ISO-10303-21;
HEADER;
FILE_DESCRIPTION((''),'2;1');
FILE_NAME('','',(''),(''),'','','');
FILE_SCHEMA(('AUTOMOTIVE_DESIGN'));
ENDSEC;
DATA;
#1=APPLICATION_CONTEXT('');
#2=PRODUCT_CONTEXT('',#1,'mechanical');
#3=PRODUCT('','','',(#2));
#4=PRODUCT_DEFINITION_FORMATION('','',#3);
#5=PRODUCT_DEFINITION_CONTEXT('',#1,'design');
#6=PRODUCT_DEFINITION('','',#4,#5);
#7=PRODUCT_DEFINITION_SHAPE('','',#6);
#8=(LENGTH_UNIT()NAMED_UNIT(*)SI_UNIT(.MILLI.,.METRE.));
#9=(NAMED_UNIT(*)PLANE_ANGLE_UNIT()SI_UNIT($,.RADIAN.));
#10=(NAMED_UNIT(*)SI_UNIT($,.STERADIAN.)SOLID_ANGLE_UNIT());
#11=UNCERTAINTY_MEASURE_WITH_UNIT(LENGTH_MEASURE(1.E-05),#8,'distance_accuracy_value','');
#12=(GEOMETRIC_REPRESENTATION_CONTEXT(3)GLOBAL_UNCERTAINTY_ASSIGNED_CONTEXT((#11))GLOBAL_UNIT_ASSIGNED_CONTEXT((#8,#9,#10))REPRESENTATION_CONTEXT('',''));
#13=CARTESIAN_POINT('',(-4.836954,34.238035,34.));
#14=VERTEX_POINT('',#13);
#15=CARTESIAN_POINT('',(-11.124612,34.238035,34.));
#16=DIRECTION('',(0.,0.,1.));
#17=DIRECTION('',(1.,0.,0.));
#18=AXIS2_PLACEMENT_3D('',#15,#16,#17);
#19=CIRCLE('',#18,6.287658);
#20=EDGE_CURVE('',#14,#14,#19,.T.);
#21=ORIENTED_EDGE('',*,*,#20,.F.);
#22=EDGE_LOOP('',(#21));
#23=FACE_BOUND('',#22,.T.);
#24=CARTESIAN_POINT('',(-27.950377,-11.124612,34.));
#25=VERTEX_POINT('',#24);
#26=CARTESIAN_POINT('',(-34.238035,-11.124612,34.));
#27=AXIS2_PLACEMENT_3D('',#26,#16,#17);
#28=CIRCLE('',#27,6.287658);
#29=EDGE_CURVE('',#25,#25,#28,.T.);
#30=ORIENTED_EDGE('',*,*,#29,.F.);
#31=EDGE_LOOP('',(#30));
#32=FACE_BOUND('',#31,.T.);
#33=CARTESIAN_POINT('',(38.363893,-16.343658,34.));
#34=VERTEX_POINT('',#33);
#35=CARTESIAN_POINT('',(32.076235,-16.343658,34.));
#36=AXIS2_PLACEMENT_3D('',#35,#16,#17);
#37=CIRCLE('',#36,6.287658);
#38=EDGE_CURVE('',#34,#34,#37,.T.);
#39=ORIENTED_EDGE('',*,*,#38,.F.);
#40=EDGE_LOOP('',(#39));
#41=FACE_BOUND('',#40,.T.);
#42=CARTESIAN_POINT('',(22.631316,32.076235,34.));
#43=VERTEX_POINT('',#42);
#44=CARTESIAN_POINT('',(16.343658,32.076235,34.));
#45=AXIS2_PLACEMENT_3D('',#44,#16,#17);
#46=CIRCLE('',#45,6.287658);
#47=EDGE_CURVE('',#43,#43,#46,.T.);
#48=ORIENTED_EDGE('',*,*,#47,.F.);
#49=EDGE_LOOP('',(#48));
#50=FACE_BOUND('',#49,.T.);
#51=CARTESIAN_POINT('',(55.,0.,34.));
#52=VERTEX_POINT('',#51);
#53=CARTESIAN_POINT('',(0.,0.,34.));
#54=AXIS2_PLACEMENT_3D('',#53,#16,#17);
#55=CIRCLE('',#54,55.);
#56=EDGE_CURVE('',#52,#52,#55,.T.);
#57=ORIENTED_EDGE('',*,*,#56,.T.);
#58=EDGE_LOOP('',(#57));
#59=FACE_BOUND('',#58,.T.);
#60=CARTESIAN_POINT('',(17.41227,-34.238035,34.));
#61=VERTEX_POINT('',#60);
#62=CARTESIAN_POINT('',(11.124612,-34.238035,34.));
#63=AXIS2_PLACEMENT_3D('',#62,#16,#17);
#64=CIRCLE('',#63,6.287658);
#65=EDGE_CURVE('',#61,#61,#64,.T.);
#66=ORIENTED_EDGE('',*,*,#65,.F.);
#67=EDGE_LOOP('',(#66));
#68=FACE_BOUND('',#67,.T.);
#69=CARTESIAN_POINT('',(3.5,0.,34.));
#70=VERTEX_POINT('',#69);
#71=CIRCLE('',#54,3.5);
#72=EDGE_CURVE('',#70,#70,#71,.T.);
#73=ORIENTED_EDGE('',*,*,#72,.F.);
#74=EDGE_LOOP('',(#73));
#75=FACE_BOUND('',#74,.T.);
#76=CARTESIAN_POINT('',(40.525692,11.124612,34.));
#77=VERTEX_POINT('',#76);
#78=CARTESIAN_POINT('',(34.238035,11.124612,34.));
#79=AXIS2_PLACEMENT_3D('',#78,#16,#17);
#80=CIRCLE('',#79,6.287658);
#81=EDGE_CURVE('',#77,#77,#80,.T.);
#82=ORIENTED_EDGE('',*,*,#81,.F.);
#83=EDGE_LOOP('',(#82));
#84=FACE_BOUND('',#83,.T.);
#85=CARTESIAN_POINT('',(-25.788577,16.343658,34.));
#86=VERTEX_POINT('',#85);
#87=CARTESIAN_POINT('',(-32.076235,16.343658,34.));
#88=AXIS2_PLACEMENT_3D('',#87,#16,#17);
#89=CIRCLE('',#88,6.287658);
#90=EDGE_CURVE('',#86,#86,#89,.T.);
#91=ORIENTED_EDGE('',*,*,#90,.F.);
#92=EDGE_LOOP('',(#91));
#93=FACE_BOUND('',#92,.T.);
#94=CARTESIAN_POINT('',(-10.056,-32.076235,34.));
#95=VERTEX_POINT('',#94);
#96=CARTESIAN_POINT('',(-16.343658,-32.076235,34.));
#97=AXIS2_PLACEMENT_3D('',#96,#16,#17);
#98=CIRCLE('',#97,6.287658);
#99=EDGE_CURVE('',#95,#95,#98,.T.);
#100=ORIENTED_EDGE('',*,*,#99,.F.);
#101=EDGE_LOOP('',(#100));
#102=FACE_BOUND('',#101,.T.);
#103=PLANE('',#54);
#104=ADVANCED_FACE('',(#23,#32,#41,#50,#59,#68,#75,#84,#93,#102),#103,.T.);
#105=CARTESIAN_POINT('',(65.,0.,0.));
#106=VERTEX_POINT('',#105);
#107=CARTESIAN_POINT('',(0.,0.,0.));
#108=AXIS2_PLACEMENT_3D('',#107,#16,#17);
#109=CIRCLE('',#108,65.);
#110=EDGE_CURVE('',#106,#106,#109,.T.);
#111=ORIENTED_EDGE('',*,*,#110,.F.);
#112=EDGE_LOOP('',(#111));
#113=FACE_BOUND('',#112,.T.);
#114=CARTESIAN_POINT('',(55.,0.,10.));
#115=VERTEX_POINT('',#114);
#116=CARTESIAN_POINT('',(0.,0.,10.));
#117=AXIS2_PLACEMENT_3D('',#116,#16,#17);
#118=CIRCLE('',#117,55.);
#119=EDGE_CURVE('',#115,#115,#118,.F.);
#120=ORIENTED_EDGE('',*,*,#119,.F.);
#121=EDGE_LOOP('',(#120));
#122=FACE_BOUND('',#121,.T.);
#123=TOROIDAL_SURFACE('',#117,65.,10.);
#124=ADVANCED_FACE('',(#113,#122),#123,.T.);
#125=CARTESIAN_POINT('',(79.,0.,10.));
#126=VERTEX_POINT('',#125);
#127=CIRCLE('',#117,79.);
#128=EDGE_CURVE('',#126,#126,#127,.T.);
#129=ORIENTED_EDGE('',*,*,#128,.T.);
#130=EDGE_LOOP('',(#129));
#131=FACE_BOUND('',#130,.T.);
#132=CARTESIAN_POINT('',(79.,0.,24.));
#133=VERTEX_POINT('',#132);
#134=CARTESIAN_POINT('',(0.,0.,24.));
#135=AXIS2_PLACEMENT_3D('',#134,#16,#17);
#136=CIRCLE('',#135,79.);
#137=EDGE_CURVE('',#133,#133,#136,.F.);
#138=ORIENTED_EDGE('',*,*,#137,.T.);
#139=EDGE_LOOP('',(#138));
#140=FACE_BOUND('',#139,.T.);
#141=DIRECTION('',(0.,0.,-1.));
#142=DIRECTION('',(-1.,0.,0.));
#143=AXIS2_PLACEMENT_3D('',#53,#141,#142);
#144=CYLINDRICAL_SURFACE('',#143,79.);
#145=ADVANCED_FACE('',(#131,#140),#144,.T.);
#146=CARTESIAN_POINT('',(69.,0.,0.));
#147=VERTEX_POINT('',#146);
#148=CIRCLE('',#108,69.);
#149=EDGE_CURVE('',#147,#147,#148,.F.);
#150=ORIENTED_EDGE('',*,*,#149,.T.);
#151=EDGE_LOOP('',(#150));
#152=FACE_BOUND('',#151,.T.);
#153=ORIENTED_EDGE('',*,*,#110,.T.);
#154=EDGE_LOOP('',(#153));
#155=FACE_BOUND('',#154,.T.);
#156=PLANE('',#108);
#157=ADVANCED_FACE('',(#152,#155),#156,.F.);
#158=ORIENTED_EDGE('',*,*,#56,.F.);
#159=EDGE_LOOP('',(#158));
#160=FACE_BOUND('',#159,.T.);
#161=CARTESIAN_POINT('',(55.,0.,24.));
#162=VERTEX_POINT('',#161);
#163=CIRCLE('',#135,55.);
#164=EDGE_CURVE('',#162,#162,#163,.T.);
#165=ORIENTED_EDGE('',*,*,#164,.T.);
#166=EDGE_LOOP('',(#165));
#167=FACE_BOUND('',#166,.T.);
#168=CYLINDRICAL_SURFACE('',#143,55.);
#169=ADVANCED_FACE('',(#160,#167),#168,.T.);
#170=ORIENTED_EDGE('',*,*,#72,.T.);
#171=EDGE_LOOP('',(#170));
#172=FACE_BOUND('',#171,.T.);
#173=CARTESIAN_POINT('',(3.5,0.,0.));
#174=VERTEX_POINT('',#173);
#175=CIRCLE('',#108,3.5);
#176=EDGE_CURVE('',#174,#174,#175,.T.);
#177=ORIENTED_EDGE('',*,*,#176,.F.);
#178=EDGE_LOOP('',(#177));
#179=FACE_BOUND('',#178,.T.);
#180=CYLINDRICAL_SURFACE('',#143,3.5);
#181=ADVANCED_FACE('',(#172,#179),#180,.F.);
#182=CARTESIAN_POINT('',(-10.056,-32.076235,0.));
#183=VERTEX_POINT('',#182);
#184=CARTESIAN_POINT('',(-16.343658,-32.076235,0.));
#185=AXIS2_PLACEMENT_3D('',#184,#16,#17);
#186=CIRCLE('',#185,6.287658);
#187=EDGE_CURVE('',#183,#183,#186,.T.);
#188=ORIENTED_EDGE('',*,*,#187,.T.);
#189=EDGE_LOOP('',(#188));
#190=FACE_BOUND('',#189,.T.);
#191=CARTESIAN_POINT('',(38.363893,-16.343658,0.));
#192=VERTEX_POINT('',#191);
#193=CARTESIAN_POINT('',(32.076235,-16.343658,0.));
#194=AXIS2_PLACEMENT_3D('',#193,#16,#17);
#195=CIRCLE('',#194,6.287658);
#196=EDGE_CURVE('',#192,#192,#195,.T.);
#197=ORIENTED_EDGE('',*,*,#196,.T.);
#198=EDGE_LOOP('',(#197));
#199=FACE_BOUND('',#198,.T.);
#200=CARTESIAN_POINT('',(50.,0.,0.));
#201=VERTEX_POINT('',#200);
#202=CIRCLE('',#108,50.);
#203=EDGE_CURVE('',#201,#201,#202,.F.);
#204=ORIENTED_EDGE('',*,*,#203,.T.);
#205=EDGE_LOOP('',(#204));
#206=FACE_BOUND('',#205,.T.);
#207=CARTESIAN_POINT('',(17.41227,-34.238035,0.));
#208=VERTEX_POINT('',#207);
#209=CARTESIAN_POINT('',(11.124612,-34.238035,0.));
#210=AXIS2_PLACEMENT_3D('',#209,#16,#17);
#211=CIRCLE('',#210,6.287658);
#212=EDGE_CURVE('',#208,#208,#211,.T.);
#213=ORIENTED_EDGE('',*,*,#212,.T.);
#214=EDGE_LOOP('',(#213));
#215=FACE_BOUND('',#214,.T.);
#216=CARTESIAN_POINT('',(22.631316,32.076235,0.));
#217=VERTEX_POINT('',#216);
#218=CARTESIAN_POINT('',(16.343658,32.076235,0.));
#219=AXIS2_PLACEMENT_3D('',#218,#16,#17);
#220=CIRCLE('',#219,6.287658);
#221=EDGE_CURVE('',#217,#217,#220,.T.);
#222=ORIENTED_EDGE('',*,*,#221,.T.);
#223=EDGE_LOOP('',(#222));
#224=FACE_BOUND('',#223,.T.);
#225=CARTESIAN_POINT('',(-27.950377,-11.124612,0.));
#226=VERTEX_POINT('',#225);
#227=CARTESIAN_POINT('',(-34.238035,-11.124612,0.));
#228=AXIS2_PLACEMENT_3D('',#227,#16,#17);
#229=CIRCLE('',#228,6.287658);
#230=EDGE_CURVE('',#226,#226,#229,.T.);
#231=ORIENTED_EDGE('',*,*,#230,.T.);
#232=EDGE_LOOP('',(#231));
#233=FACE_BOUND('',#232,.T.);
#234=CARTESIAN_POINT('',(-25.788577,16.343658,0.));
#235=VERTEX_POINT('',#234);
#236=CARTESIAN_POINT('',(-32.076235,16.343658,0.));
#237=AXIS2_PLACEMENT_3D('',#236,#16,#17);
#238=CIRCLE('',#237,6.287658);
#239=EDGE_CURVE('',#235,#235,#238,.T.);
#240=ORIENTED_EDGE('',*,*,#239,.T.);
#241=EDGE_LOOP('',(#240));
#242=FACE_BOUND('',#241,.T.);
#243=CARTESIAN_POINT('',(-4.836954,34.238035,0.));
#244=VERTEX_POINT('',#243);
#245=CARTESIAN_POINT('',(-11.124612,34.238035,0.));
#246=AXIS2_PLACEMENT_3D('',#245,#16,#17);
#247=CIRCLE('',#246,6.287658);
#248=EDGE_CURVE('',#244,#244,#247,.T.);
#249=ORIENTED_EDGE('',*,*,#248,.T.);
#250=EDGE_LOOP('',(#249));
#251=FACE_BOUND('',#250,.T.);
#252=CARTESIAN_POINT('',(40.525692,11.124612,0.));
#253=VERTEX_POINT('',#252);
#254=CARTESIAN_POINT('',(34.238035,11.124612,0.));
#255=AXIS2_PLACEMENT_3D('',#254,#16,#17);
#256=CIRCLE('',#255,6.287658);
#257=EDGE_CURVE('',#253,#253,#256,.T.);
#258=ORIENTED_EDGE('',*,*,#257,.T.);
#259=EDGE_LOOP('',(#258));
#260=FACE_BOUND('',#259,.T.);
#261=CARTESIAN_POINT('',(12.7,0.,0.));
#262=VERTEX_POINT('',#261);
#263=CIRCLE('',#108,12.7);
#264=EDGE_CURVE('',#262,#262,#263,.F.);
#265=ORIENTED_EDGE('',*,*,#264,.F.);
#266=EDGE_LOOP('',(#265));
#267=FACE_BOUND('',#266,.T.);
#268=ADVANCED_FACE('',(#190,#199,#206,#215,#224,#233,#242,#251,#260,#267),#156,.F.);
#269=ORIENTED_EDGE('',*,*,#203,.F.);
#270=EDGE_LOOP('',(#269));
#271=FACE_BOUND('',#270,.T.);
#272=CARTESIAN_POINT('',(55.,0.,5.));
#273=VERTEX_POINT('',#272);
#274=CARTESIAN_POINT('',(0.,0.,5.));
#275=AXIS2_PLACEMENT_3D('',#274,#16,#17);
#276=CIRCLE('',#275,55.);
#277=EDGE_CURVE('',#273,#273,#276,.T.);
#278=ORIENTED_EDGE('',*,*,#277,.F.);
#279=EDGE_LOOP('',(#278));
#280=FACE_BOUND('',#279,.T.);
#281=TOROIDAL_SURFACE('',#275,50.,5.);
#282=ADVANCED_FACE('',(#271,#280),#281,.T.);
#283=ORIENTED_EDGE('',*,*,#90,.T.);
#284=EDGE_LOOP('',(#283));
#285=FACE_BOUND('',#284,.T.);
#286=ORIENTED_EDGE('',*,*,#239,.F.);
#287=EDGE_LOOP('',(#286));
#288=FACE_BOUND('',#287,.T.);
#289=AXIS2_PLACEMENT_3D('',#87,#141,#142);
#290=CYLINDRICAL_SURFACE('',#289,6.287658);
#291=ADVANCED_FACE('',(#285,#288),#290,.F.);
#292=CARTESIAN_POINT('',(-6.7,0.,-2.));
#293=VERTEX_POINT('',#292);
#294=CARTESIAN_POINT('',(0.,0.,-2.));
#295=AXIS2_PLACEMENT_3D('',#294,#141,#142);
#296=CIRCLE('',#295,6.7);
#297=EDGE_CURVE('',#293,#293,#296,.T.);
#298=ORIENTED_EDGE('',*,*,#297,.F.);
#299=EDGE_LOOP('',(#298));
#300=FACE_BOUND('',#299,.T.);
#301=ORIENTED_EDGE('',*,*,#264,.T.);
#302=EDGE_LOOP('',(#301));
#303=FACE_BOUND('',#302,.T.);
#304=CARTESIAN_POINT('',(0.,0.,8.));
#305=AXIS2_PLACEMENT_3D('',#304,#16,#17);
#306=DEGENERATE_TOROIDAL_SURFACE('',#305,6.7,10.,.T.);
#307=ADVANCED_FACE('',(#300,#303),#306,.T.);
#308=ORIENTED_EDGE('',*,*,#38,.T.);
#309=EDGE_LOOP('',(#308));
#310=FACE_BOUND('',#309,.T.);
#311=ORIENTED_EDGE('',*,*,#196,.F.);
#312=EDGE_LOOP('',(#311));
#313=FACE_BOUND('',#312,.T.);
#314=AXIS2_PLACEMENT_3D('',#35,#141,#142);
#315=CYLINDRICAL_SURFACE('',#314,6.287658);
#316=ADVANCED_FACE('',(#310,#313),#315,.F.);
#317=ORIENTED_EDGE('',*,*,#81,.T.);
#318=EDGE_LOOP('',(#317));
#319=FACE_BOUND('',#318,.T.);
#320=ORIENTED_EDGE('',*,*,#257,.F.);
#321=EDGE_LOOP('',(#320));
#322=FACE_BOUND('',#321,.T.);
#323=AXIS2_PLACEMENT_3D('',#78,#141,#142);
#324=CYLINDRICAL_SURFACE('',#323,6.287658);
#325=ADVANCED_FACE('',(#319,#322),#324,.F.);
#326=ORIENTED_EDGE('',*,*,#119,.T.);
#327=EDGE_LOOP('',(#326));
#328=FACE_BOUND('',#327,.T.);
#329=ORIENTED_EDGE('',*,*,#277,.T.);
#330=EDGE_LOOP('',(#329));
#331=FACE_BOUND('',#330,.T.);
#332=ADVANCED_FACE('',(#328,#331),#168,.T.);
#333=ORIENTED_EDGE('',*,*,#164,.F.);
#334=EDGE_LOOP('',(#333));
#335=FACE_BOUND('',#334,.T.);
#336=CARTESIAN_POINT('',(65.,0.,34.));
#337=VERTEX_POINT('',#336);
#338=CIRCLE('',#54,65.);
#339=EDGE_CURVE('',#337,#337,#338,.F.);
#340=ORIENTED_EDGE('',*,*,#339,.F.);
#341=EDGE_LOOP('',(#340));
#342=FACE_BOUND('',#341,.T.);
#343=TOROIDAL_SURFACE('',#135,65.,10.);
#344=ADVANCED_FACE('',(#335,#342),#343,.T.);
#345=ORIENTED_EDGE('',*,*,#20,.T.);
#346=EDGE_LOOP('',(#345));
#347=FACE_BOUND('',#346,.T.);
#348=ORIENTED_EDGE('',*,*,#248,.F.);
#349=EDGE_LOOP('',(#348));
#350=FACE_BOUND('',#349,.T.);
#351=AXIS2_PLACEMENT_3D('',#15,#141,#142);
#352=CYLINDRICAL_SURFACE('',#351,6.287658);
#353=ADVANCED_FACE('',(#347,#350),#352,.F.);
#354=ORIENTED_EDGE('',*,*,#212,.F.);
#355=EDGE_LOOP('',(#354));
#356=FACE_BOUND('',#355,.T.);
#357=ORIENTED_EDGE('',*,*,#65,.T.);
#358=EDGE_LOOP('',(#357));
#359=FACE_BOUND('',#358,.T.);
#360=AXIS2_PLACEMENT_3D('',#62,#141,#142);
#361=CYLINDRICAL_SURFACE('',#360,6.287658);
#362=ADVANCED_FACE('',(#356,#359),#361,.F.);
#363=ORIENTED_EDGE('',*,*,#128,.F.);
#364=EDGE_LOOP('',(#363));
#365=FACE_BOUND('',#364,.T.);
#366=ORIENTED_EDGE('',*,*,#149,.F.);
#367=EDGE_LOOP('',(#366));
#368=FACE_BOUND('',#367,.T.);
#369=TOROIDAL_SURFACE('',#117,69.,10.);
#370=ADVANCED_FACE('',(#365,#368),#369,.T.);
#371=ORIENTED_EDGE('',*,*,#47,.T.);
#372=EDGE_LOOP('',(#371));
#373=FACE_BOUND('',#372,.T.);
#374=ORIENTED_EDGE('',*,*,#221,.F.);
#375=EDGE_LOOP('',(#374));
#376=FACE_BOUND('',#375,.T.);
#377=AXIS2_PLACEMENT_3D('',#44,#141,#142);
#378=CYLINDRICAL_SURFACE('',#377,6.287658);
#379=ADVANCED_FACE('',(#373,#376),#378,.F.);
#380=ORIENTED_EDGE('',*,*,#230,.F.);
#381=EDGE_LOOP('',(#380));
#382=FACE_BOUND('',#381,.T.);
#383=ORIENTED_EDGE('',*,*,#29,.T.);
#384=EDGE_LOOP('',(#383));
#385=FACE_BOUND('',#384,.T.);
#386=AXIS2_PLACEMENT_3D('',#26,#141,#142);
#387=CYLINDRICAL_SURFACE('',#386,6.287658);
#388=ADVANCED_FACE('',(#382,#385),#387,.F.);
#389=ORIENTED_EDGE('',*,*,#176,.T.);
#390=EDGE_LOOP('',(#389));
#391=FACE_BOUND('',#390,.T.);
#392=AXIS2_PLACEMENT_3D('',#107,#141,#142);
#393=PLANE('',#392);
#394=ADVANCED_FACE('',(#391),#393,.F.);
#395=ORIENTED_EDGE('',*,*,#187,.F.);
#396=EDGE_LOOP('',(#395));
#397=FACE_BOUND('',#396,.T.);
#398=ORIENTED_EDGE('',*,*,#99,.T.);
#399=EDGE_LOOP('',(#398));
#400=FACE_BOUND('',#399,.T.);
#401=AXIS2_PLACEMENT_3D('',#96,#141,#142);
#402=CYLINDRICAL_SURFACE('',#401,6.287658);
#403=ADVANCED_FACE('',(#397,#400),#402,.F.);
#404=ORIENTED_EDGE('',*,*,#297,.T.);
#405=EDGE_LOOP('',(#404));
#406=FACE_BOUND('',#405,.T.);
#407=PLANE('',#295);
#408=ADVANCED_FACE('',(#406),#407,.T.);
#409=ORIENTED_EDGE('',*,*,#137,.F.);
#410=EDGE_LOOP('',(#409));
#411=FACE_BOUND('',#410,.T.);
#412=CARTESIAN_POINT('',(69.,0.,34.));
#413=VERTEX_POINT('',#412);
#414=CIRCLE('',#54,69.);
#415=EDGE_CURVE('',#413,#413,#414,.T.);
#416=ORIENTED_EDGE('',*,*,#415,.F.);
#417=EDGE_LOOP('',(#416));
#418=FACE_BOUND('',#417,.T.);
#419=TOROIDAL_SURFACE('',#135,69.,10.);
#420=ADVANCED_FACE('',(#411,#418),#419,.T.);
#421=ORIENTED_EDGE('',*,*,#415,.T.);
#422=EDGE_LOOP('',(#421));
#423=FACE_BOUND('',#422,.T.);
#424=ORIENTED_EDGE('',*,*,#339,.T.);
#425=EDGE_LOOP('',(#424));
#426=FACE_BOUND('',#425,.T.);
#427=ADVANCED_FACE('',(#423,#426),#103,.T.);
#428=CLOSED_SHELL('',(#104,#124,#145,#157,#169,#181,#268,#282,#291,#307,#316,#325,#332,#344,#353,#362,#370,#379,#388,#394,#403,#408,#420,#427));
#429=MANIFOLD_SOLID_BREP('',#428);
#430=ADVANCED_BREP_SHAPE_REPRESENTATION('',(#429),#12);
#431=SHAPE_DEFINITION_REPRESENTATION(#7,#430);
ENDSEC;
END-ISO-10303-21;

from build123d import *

# Parameters (mm, degrees)
SKETCH1_R           = 79
SKETCH1_R_2         = 55
BOSS_EXTRUDE1_DEPTH = 34
FILLET1_R           = 10
SKETCH2_R           = 55
SKETCH2_R_2         = 6.28765786
SKETCH2_R_3         = 3.5
BOSS_EXTRUDE2_DEPTH = 34
SKETCH4_R           = 12.7
BOSS_EXTRUDE3_DEPTH = 2
FILLET2_R           = 10
FILLET3_R           = 5


with BuildPart() as part:
    # Sketch1 → Boss-Extrude1 (new body)
    with BuildSketch(Plane.XY):
        Circle(SKETCH1_R)
        Circle(SKETCH1_R_2, mode=Mode.SUBTRACT)
    extrude(amount=BOSS_EXTRUDE1_DEPTH)

    # Fillet1
    fillet1_edges = [part.edges().sort_by_distance(p)[0] for p in [
        (-79, 0, 0),
        (-79, 0, 34),
        (-55, 0, 0),
        (-55, 0, 34),
    ]]
    fillet(fillet1_edges, radius=FILLET1_R)

    # Sketch2 → Boss-Extrude2 (add)
    with BuildSketch(Plane.XY):
        Circle(SKETCH2_R)
        with Locations((-11.124611797, 34.238034587)):
            Circle(SKETCH2_R_2, mode=Mode.SUBTRACT)
        with Locations((16.343657991, 32.076234871)):
            Circle(SKETCH2_R_2, mode=Mode.SUBTRACT)
        with Locations((34.238034587, 11.124611798)):
            Circle(SKETCH2_R_2, mode=Mode.SUBTRACT)
        with Locations((32.076234871, -16.343657991)):
            Circle(SKETCH2_R_2, mode=Mode.SUBTRACT)
        with Locations((11.124611798, -34.238034587)):
            Circle(SKETCH2_R_2, mode=Mode.SUBTRACT)
        with Locations((-16.343657991, -32.076234871)):
            Circle(SKETCH2_R_2, mode=Mode.SUBTRACT)
        with Locations((-34.238034587, -11.124611798)):
            Circle(SKETCH2_R_2, mode=Mode.SUBTRACT)
        with Locations((-32.076234871, 16.343657991)):
            Circle(SKETCH2_R_2, mode=Mode.SUBTRACT)
        Circle(SKETCH2_R_3, mode=Mode.SUBTRACT)
    extrude(amount=BOSS_EXTRUDE2_DEPTH)

    # Sketch4 → Boss-Extrude3 (add)
    with BuildSketch(Plane(origin=(0, 0, 0), x_dir=(-1, 0, 0), z_dir=(0, 0, -1))):
        with Locations(Location((0, 0, 0), (0, 0, 180))):
            Circle(SKETCH4_R)
    extrude(amount=BOSS_EXTRUDE3_DEPTH)

    # Fillet2
    # the kernel refuses this fillet: 10 mm, written as the material it takes off along each edge
    with BuildSketch(Plane(origin=(0, 0, -2), x_dir=(1, 0, 0), z_dir=(0, 1, 0))) as fillet2_piece_1:
        with BuildLine():
            CenterArc((6.7, -10), FILLET2_R, 53.130102354, 36.869897646)
            Line((6.7, 0), (6.7, 0.2))
            Line((6.7, 0.2), (12.7, 0.2))
            Line((12.7, 0.2), (12.9, 0))
            ThreePointArc((12.9, 0), (12.9, -1), (12.82, -1.84))
            Line((12.82, -1.84), (12.7, -2))
        make_face()
    revolve(axis=Axis((0, 0, -2), (0, 0, -1)), mode=Mode.SUBTRACT)

    # Fillet3
    fillet3_edges = [part.edges().sort_by_distance(p)[0] for p in [
        (-55, 0, 0),
    ]]
    fillet(fillet3_edges, radius=FILLET3_R)


solid = part.part
